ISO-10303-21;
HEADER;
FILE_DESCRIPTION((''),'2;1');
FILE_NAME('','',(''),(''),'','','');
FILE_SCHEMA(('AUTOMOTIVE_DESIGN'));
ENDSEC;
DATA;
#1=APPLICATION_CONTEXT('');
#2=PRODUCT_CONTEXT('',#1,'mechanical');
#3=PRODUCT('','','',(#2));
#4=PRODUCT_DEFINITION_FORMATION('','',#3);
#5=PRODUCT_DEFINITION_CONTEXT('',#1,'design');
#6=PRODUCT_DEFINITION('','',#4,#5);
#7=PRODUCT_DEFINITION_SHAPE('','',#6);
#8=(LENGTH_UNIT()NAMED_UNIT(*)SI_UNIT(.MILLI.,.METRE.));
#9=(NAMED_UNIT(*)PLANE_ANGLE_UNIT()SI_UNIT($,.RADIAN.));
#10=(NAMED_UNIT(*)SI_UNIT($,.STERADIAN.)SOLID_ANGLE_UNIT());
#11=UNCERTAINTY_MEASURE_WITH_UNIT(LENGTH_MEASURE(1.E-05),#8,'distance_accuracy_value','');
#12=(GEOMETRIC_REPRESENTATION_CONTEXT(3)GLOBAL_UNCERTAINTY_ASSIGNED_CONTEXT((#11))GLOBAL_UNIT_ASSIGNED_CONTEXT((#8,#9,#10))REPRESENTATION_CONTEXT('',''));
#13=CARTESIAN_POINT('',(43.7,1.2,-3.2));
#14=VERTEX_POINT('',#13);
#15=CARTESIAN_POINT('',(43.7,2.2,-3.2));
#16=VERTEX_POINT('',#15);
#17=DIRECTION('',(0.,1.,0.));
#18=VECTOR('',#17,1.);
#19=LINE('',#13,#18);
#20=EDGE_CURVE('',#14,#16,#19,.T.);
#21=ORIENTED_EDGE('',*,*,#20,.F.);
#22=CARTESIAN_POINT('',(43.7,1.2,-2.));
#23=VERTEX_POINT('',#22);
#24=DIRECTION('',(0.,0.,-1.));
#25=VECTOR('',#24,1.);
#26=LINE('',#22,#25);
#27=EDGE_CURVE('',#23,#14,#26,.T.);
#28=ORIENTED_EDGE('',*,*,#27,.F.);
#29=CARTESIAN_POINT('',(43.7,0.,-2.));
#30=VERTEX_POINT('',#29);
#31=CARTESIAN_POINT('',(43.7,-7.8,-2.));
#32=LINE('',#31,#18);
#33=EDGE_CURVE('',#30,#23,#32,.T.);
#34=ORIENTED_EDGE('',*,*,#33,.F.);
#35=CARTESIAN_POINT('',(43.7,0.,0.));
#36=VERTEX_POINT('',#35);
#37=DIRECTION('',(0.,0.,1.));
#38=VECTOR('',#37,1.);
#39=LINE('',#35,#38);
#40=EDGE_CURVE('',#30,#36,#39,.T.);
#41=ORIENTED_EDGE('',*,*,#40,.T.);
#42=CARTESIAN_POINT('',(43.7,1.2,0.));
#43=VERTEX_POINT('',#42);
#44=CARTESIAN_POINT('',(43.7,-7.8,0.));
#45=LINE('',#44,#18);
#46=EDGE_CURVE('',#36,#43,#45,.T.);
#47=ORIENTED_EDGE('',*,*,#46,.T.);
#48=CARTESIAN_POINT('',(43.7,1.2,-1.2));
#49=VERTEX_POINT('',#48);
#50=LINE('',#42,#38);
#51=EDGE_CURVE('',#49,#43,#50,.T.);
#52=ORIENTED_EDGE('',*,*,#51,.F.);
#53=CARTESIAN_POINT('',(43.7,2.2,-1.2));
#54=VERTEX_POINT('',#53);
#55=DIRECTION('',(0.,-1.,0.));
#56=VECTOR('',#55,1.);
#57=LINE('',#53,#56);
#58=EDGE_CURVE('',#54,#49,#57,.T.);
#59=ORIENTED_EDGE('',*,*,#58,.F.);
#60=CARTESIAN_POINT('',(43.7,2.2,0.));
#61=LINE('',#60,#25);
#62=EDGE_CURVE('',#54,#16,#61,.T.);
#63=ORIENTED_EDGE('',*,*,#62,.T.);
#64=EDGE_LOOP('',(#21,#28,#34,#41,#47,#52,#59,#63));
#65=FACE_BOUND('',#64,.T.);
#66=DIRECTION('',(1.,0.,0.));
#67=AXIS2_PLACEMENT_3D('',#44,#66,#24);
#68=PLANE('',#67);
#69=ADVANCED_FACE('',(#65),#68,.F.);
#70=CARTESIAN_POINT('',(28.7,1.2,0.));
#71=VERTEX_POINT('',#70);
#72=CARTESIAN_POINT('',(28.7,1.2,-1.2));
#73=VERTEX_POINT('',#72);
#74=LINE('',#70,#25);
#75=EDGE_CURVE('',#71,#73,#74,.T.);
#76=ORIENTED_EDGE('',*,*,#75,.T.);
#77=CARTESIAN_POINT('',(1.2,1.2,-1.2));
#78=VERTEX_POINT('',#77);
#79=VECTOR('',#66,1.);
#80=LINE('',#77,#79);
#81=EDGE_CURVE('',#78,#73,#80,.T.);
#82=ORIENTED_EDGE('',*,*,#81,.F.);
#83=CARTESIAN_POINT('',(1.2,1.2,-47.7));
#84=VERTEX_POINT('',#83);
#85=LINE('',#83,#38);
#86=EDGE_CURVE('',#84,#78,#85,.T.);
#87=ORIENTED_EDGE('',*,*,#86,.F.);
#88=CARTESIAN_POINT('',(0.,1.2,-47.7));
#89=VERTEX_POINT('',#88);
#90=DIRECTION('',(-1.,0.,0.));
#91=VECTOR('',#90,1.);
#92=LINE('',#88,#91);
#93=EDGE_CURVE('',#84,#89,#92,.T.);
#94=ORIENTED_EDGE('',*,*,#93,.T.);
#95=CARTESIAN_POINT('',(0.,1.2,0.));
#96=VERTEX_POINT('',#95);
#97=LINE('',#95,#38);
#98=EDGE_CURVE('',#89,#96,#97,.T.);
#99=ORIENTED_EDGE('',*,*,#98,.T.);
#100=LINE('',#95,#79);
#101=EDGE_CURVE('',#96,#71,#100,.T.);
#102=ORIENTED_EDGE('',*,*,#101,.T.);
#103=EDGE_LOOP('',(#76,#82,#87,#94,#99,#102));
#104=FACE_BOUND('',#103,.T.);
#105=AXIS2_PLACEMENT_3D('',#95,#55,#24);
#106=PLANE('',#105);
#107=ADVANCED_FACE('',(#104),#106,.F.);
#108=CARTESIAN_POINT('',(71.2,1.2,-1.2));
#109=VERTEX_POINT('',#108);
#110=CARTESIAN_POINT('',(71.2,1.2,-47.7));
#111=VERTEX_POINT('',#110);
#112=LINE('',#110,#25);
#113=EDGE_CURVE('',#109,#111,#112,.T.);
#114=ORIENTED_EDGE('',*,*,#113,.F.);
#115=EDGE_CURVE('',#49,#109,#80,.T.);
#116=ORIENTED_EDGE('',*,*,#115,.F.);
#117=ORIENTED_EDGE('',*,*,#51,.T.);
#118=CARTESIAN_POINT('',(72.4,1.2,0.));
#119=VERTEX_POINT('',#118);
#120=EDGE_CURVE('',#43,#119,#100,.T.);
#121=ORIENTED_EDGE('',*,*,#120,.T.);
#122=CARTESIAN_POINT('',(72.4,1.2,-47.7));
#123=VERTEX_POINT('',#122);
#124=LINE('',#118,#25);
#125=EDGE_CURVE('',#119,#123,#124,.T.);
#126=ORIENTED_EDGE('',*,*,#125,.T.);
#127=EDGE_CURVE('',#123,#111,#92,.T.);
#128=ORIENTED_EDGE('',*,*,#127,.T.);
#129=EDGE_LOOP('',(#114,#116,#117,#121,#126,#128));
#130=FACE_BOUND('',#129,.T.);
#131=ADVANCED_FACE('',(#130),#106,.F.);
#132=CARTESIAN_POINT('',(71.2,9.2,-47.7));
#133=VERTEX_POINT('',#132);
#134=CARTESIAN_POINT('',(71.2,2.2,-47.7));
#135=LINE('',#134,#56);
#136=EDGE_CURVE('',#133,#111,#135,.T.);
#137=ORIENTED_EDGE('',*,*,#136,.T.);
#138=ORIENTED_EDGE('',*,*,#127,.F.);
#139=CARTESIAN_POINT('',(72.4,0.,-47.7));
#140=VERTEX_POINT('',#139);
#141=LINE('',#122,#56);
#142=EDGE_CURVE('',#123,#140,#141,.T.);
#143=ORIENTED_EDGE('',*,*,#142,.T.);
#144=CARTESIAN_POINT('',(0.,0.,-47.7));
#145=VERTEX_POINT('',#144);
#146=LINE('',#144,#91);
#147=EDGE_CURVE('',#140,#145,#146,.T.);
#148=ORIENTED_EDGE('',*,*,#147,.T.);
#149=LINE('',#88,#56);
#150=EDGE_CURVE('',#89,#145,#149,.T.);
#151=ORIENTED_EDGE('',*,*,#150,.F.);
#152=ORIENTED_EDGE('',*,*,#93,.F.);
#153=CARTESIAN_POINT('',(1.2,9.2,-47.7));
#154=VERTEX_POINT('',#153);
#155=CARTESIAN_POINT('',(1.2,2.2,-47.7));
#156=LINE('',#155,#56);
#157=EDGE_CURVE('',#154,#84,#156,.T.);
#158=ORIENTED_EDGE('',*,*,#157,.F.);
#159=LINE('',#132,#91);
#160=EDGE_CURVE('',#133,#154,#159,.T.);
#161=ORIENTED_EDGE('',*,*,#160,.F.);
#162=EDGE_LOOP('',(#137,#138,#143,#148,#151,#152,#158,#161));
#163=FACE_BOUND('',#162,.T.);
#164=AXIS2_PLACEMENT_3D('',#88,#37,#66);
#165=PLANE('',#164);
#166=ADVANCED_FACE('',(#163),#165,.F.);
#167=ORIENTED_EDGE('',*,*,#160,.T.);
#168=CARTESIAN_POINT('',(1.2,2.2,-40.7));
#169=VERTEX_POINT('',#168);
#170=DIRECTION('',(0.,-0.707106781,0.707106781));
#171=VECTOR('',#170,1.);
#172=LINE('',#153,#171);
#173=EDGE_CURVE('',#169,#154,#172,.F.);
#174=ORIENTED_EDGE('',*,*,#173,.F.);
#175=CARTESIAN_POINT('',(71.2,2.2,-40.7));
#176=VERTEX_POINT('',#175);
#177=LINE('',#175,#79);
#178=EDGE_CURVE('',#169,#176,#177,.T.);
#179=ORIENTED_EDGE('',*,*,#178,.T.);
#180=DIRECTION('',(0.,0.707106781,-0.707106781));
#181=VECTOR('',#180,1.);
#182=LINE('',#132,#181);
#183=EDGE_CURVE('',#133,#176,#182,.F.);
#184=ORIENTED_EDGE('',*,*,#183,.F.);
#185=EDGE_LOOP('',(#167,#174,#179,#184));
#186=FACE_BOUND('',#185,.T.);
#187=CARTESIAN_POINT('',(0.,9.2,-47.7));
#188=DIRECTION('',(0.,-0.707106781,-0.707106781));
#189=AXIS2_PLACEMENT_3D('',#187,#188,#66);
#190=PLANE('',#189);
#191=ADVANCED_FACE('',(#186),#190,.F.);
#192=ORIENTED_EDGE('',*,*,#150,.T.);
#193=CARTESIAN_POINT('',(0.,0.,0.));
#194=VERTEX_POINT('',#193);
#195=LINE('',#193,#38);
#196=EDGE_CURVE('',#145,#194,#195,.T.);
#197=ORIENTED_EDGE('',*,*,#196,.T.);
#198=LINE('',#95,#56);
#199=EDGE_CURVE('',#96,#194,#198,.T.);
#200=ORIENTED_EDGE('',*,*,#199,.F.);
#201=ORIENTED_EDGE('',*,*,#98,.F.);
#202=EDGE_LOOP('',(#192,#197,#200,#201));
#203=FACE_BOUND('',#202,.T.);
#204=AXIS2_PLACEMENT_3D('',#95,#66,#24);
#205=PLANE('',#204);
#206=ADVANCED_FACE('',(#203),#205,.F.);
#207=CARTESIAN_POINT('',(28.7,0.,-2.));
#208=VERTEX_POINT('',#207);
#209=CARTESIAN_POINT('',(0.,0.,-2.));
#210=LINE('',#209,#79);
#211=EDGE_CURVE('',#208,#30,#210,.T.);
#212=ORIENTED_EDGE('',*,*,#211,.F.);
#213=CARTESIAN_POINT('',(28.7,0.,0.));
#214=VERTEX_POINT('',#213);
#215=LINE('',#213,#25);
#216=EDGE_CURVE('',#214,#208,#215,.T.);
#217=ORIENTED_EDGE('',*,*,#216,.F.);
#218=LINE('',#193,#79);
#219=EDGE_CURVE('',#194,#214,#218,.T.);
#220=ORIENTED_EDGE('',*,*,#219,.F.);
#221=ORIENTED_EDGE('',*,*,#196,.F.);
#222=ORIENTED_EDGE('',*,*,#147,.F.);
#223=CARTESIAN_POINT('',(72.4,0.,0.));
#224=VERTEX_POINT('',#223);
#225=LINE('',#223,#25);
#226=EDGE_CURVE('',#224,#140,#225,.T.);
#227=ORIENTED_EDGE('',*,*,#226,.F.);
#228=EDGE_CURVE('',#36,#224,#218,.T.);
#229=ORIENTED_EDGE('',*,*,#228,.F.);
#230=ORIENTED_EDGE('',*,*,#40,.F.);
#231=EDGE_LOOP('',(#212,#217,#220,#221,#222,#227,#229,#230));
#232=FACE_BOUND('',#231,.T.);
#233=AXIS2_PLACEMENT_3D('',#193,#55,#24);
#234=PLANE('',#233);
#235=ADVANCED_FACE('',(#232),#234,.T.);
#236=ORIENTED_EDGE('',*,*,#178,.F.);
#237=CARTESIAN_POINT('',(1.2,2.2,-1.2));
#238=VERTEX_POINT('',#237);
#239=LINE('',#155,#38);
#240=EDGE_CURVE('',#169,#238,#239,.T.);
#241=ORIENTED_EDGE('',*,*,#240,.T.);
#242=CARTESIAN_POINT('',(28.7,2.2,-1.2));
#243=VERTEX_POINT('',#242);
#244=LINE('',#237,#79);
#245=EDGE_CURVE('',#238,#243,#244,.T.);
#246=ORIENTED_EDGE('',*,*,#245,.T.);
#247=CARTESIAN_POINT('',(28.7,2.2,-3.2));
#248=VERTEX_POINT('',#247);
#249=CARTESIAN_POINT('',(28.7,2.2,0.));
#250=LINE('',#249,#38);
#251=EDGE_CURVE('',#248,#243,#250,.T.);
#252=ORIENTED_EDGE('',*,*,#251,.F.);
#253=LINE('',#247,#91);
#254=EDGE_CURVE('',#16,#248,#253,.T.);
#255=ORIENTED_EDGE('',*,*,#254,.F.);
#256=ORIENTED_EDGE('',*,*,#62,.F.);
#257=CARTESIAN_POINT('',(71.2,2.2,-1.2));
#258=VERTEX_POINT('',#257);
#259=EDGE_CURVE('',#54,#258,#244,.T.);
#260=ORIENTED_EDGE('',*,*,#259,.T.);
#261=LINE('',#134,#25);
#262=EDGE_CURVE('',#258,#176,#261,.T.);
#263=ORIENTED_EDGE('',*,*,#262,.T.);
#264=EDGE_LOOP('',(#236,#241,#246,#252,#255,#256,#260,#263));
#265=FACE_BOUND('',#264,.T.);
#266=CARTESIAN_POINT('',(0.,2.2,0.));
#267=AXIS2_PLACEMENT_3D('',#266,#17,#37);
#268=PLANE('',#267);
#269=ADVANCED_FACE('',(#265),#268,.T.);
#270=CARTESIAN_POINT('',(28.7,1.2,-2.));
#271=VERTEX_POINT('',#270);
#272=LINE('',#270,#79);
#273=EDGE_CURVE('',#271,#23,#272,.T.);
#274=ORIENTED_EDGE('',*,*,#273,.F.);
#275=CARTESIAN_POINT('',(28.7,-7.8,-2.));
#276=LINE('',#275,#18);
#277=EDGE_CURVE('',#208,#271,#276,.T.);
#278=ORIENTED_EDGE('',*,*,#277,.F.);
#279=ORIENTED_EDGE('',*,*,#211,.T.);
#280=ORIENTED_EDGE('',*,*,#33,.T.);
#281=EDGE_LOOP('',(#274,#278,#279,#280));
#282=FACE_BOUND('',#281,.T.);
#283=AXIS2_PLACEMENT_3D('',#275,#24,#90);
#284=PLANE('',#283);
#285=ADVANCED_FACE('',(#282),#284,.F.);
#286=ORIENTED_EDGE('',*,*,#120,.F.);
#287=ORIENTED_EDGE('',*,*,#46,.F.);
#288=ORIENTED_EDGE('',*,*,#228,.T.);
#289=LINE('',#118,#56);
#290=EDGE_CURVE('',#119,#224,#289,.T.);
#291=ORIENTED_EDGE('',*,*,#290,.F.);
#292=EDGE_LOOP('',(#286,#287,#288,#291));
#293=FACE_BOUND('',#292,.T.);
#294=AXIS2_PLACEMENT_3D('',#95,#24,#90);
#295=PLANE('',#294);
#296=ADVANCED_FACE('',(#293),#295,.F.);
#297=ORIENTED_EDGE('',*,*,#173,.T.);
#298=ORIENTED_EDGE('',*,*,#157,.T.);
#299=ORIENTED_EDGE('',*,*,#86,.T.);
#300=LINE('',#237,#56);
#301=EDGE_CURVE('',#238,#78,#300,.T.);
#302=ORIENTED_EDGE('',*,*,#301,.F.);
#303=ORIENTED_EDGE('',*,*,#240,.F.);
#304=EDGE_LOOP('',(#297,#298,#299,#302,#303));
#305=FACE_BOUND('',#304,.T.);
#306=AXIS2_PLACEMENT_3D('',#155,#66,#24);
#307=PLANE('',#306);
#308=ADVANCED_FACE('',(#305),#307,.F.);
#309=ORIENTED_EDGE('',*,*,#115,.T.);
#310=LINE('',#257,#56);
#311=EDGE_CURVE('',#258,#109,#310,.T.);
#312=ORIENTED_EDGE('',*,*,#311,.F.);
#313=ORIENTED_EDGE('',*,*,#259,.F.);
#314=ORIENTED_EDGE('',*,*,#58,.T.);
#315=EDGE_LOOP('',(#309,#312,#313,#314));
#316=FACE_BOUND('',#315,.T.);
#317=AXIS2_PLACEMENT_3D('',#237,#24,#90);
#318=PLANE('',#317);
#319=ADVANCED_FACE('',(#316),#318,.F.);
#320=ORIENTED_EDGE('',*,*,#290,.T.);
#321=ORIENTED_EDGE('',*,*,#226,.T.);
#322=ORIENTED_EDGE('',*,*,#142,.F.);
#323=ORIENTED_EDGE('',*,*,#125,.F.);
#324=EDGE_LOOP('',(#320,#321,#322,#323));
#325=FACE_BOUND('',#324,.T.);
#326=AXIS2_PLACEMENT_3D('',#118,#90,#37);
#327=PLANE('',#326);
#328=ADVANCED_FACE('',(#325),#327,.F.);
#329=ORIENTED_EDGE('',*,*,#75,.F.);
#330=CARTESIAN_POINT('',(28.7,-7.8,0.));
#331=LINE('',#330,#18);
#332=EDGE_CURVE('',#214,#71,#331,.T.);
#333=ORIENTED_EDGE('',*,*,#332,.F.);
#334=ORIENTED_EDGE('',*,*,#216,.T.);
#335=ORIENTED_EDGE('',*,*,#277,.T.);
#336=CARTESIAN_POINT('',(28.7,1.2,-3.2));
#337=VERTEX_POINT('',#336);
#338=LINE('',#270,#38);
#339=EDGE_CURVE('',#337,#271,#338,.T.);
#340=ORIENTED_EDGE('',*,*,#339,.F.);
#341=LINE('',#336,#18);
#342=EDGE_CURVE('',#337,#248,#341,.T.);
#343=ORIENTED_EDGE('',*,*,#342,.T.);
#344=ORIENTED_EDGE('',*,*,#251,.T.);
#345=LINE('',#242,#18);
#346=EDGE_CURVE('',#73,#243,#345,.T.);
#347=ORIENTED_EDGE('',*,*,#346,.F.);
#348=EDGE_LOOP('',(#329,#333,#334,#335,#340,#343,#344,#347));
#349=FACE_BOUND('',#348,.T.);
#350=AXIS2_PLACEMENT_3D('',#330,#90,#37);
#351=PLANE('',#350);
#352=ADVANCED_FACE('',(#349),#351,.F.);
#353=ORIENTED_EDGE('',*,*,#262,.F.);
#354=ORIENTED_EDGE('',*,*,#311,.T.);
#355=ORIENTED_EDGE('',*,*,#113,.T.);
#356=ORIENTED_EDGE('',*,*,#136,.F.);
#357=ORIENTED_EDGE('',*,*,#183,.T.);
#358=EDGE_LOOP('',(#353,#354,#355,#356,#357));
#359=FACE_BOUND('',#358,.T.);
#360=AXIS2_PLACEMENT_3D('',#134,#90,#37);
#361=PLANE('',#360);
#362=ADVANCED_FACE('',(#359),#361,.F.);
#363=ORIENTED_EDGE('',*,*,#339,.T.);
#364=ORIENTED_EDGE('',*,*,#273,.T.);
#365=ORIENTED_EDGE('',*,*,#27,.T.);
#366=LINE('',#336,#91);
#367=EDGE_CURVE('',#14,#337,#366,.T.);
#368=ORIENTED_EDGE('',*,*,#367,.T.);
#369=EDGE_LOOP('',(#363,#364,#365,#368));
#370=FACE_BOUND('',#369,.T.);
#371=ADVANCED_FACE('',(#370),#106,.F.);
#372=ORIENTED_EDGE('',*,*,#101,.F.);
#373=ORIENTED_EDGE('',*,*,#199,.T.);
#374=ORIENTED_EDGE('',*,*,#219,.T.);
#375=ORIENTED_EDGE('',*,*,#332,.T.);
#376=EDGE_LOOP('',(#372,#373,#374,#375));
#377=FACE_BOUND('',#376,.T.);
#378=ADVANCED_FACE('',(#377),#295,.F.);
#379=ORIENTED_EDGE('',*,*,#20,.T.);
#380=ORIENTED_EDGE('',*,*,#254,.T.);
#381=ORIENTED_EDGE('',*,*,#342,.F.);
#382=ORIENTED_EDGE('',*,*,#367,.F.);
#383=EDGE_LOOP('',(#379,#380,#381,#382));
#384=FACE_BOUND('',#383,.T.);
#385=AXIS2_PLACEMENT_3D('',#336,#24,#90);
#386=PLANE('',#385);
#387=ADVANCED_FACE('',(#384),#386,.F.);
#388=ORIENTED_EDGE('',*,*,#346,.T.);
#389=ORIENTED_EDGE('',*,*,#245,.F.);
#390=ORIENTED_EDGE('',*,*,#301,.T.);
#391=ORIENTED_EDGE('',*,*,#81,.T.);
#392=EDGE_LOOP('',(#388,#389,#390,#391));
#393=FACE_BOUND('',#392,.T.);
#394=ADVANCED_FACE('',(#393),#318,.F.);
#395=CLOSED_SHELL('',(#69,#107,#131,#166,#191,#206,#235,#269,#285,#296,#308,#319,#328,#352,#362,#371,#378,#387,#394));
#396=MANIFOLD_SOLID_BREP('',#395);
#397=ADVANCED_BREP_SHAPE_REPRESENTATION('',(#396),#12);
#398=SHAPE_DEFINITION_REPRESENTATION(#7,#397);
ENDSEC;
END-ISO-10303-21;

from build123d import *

# Parameters (mm, degrees)
SKICA2_W                 = 72.4
SKICA2_H                 = 47.7
P_IDAT_VYSUNUT_M1_DEPTH  = 1.2
SKICA3_W                 = 70
SKICA3_H                 = 46.5
P_IDAT_VYSUNUT_M2_DEPTH  = 1
SKICA4_W                 = 70
SKICA4_H                 = 7
P_IDAT_VYSUNUT_M3_DEPTH  = 7
ZKOSEN_2_SIZE            = 7
SKICA5_W                 = 15
SKICA5_H                 = 2
ODEBRAT_VYSUNUT_M1_DEPTH = 10
SKICA6_W                 = 15
SKICA6_H                 = 1.2
ODEBRAT_VYSUNUT_M2_DEPTH = 1


with BuildPart() as part:
    # Skica2 → Přidat vysunutím1 (new body)
    with BuildSketch(Plane(origin=(0, 0, 0), x_dir=(1, 0, 0), z_dir=(0, 1, 0))):
        with Locations((36.2, 23.85)):
            Rectangle(SKICA2_W, SKICA2_H)
    extrude(amount=P_IDAT_VYSUNUT_M1_DEPTH)

    # Skica3 → Přidat vysunutím2 (add)
    with BuildSketch(Plane(origin=(0, 1.2, 0), x_dir=(1, 0, 0), z_dir=(0, 1, 0))):
        with Locations((36.2, 24.45)):
            Rectangle(SKICA3_W, SKICA3_H)
    extrude(amount=P_IDAT_VYSUNUT_M2_DEPTH)

    # Skica4 → Přidat vysunutím3 (add)
    with BuildSketch(Plane(origin=(0, 2.2, 0), x_dir=(1, 0, 0), z_dir=(0, 1, 0))):
        with Locations((36.2, 44.2)):
            Rectangle(SKICA4_W, SKICA4_H)
    extrude(amount=P_IDAT_VYSUNUT_M3_DEPTH)

    # Zkosení2
    zkosen_2_edges = [part.edges().sort_by_distance(p)[0] for p in [
        (36.2, 9.2, -40.7),
    ]]
    chamfer(zkosen_2_edges, length=ZKOSEN_2_SIZE - 0.0001)  # a hair under: the kernel refuses the full size

    # Skica5 → Odebrat vysunutím1 (cut)
    with BuildSketch(Plane(origin=(0, 2.2, 0), x_dir=(1, 0, 0), z_dir=(0, 1, 0))):
        with Locations((36.2, 1)):
            Rectangle(SKICA5_W, SKICA5_H)
    extrude(amount=-ODEBRAT_VYSUNUT_M1_DEPTH, mode=Mode.SUBTRACT)

    # Skica6 → Odebrat vysunutím2 (cut)
    with BuildSketch(Plane(origin=(0, 2.2, 0), x_dir=(1, 0, 0), z_dir=(0, 1, 0))):
        with Locations((36.2, 2.6)):
            Rectangle(SKICA6_W, SKICA6_H)
    extrude(amount=-ODEBRAT_VYSUNUT_M2_DEPTH, mode=Mode.SUBTRACT)


solid = part.part
